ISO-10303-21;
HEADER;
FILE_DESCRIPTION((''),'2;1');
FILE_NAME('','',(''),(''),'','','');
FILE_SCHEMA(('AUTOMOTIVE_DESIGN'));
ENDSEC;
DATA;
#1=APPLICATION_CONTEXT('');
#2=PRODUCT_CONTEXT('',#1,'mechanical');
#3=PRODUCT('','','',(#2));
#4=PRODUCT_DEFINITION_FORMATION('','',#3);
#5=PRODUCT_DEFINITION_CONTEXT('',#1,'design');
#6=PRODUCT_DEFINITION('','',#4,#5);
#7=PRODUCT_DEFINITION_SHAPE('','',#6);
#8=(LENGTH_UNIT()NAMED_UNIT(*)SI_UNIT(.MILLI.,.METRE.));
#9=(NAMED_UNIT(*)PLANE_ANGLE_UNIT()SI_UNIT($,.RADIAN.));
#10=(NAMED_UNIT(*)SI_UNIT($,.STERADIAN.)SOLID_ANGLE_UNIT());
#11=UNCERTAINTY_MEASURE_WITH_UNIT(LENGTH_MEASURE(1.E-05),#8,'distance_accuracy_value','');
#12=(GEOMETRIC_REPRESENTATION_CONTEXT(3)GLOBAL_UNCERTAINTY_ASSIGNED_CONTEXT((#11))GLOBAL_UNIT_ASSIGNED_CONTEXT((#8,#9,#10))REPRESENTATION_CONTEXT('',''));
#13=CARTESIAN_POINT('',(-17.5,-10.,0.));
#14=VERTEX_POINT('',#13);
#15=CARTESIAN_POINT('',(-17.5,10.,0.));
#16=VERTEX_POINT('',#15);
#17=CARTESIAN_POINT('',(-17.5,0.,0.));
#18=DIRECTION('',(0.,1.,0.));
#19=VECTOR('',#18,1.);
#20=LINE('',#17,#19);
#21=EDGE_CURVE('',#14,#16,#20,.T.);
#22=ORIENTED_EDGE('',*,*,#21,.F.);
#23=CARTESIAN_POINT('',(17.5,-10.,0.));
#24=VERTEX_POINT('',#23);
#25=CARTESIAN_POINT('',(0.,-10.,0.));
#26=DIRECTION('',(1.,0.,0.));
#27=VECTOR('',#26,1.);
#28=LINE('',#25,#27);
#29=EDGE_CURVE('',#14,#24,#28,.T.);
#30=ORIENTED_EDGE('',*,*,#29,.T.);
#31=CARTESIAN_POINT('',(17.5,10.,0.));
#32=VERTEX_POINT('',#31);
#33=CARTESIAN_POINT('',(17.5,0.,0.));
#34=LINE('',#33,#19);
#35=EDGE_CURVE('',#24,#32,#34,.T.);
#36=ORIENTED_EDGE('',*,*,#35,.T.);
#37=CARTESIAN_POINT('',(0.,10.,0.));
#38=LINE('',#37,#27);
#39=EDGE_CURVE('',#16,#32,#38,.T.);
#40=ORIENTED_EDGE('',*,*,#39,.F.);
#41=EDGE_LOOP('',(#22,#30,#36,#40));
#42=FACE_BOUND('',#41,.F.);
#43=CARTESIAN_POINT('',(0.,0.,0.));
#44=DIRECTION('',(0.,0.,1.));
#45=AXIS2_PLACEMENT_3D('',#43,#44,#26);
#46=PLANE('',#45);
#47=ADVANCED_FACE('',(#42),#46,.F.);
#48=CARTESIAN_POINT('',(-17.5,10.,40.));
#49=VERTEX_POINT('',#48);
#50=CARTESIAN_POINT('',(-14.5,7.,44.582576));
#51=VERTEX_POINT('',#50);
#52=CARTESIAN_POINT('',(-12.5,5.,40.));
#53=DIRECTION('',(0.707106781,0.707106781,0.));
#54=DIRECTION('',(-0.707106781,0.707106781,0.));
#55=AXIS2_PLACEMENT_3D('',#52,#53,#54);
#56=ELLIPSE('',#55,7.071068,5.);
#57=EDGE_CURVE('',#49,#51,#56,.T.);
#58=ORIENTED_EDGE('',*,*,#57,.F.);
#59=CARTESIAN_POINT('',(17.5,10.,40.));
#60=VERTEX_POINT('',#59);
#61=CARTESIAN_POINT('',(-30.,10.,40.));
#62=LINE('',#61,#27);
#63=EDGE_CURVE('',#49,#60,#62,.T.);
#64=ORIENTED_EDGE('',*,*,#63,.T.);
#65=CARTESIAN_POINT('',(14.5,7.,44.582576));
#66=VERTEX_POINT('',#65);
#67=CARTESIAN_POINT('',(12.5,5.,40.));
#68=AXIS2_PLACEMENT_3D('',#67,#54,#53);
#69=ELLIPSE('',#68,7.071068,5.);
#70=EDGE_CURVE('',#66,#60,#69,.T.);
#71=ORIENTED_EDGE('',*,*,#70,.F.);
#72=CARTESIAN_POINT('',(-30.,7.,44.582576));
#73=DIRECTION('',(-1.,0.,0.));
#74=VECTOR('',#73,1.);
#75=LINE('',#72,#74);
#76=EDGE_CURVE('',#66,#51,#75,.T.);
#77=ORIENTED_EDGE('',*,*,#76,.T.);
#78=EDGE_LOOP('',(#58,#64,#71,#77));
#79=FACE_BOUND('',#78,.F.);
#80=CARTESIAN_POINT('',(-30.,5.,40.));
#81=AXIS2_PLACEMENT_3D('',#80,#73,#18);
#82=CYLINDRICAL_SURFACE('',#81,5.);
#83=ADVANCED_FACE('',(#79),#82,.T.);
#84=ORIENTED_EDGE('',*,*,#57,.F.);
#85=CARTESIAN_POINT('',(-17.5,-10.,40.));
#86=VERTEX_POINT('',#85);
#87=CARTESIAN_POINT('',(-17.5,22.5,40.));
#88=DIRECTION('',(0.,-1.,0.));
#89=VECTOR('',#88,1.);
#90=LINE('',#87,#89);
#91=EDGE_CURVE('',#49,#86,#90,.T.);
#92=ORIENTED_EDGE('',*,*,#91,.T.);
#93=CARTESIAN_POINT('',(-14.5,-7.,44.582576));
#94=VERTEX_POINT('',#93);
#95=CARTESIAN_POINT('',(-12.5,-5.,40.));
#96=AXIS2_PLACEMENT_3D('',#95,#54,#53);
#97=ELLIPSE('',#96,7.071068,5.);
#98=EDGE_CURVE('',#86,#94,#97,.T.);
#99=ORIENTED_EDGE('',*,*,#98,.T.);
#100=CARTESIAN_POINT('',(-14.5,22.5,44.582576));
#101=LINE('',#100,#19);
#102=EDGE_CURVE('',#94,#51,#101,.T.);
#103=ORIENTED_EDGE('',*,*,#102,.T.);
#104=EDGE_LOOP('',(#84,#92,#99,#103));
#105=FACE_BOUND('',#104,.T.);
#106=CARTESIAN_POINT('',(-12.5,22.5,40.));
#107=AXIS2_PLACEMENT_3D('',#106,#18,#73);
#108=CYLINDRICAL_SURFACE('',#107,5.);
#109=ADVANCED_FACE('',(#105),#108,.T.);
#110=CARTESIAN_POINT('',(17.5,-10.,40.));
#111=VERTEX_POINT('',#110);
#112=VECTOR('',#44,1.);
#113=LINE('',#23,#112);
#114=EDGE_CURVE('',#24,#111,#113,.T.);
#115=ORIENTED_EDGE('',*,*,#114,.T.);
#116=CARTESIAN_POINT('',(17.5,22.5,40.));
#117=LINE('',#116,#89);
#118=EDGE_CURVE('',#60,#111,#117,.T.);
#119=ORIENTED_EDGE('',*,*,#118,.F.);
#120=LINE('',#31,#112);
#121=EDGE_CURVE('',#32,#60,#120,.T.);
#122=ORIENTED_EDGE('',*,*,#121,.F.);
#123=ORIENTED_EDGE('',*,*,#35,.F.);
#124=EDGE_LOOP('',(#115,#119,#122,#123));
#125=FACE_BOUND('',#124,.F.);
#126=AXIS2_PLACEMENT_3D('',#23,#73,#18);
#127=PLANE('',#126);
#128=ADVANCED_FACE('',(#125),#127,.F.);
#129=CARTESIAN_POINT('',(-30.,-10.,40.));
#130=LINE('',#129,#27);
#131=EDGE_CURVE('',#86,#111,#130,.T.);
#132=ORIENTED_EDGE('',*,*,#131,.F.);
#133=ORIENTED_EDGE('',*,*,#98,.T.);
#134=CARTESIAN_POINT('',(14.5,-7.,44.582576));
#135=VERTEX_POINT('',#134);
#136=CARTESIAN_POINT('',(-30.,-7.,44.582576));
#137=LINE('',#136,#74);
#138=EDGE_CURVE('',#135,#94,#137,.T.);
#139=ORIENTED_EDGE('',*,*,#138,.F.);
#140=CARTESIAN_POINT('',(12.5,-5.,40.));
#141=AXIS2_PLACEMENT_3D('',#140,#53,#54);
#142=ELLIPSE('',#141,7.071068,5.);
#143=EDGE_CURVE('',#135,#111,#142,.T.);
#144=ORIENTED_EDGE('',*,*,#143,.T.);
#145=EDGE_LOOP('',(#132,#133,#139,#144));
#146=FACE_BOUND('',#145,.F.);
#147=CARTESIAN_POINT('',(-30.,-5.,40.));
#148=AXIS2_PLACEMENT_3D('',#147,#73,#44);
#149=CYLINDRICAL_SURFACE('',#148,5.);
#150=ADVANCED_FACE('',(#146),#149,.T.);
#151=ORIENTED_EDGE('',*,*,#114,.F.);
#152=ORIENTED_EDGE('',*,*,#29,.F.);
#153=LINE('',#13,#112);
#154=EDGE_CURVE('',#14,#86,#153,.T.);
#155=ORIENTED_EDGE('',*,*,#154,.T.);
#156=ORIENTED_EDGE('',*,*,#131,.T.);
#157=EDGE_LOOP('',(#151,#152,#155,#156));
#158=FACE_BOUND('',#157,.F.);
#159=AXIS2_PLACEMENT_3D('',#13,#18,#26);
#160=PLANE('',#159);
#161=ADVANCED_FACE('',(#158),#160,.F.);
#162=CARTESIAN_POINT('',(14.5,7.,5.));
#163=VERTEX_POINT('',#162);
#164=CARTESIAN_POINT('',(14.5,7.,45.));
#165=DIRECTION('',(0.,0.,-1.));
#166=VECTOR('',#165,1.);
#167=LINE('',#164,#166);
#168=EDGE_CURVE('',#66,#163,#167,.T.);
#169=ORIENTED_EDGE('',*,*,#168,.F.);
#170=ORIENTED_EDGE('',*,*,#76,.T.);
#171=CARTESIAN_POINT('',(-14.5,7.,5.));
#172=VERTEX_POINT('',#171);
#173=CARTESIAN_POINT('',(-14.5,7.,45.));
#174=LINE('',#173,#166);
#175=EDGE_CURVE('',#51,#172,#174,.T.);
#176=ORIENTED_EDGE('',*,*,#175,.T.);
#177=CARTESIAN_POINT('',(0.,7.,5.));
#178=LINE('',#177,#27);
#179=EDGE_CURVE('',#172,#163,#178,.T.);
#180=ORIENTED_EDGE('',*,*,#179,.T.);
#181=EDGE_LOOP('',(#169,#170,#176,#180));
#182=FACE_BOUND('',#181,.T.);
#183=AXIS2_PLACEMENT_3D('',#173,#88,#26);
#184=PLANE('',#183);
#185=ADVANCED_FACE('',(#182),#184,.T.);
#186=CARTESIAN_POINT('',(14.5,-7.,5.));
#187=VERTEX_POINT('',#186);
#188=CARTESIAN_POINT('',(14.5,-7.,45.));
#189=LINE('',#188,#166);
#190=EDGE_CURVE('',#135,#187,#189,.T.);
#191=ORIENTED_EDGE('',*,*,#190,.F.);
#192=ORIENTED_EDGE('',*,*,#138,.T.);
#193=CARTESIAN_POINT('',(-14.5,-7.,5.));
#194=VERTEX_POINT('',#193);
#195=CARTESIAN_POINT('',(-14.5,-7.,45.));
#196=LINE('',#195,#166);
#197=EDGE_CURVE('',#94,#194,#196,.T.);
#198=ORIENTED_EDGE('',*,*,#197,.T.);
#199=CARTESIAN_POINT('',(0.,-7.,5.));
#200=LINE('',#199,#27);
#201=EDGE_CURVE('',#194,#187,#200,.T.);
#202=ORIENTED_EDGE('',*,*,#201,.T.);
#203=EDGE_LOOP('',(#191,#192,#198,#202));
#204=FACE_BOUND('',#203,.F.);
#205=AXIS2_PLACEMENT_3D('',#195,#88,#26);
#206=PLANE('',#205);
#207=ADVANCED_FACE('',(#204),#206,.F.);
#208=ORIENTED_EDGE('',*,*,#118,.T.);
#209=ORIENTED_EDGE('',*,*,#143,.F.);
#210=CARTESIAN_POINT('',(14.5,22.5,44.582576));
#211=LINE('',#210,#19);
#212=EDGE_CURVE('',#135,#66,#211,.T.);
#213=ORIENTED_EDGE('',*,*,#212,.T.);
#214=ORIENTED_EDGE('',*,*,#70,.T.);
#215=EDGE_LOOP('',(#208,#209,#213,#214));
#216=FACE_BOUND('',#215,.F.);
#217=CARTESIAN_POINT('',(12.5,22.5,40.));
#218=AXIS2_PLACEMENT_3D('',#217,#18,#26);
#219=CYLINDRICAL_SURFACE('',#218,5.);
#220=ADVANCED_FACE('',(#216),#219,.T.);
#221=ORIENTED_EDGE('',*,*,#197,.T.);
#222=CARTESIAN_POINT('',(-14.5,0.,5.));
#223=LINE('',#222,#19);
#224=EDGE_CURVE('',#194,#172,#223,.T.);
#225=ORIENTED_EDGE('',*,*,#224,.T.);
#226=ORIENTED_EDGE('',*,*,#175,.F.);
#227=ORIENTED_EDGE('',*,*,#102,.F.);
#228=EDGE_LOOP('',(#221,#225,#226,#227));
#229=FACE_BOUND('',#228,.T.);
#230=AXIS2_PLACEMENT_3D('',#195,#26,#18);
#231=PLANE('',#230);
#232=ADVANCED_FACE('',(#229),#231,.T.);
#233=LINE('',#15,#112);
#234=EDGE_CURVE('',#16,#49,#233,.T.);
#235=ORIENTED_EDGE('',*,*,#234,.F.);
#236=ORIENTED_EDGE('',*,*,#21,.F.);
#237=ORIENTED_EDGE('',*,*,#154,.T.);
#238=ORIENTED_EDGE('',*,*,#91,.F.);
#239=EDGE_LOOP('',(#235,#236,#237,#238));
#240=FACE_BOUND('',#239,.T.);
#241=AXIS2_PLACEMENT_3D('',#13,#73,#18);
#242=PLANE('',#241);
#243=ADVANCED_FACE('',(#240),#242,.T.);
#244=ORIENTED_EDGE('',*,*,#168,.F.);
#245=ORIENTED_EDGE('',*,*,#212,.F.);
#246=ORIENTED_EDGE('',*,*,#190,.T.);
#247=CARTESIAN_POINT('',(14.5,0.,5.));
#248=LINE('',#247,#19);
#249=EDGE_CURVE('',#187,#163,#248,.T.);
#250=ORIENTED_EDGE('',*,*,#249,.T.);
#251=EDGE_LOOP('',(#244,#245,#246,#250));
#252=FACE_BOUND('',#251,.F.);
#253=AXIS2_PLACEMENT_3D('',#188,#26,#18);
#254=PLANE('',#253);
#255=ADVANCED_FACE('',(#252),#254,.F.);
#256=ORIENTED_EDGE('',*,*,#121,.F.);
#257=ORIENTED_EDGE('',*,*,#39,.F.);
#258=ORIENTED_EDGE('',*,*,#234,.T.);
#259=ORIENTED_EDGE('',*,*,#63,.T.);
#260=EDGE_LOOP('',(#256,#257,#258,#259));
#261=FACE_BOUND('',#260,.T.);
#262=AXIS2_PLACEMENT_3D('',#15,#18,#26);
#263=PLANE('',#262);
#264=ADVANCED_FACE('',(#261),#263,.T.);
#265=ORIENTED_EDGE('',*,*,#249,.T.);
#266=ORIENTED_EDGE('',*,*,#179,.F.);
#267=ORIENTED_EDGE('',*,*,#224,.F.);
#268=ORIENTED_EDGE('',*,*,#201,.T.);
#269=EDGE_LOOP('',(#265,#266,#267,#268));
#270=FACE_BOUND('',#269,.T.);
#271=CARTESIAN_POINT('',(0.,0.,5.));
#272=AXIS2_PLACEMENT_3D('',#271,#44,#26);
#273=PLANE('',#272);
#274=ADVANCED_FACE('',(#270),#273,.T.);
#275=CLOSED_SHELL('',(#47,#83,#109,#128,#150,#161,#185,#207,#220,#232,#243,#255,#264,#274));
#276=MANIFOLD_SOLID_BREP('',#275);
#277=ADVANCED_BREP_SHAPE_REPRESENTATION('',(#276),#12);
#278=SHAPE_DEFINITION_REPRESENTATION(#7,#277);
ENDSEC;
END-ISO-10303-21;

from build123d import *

# Parameters (mm, degrees)
F0_W        = 35
F0_H        = 20
F1_DEPTH    = 45
F2_W        = 29
F2_H        = 14
F3_DEPTH    = 40
F4_T1_DEPTH = 45
F4_T3_DEPTH = 60


# Not quite as in the source:
# - a fillet or chamfer that OpenCascade refuses, or shapes differently, is made with other operations: its cross-section is extruded or revolved along the edge and cut away or added
# - a feature names something its author has since deleted; it is built from what else it names


with BuildPart() as f1:
    # F0 (on Top) → F1 (new body)
    with BuildSketch(Plane.XY):
        Rectangle(F0_W, F0_H)
    extrude(amount=F1_DEPTH)

    # F2 (on face) → F3 (cut)
    with BuildSketch(Plane.XY.offset(45)):
        Rectangle(F2_W, F2_H)
    extrude(amount=-F3_DEPTH, mode=Mode.SUBTRACT)

    # F4: fillet of radius 5 on 4 edges, made by hand

    # F4_s2 → F4_t1 (cut)
    with BuildSketch(Plane.XZ.offset(-22.5)):
        with BuildLine():
            ThreePointArc((17.5, 40), (16.0355339059, 43.5355339059), (12.5, 45))
            Line((12.5, 45), (17.5, 45))
            Line((17.5, 45), (17.5, 40))
        make_face()
        with BuildLine():
            ThreePointArc((-17.5, 40), (-16.0355339059, 43.5355339059), (-12.5, 45))
            Line((-12.5, 45), (-17.5, 45))
            Line((-17.5, 45), (-17.5, 40))
        make_face()
    extrude(amount=F4_T1_DEPTH, mode=Mode.SUBTRACT)

    # F4_s4 → F4_t3 (cut)
    with BuildSketch(Plane.YZ.offset(-30)):
        with BuildLine():
            ThreePointArc((-5, 45), (-8.5355339059, 43.5355339059), (-10, 40))
            Line((-10, 40), (-10, 45))
            Line((-10, 45), (-5, 45))
        make_face()
        with BuildLine():
            ThreePointArc((10, 40), (8.5355339059, 43.5355339059), (5, 45))
            Line((5, 45), (10, 45))
            Line((10, 45), (10, 40))
        make_face()
    extrude(amount=F4_T3_DEPTH, mode=Mode.SUBTRACT)


solid = f1.part
